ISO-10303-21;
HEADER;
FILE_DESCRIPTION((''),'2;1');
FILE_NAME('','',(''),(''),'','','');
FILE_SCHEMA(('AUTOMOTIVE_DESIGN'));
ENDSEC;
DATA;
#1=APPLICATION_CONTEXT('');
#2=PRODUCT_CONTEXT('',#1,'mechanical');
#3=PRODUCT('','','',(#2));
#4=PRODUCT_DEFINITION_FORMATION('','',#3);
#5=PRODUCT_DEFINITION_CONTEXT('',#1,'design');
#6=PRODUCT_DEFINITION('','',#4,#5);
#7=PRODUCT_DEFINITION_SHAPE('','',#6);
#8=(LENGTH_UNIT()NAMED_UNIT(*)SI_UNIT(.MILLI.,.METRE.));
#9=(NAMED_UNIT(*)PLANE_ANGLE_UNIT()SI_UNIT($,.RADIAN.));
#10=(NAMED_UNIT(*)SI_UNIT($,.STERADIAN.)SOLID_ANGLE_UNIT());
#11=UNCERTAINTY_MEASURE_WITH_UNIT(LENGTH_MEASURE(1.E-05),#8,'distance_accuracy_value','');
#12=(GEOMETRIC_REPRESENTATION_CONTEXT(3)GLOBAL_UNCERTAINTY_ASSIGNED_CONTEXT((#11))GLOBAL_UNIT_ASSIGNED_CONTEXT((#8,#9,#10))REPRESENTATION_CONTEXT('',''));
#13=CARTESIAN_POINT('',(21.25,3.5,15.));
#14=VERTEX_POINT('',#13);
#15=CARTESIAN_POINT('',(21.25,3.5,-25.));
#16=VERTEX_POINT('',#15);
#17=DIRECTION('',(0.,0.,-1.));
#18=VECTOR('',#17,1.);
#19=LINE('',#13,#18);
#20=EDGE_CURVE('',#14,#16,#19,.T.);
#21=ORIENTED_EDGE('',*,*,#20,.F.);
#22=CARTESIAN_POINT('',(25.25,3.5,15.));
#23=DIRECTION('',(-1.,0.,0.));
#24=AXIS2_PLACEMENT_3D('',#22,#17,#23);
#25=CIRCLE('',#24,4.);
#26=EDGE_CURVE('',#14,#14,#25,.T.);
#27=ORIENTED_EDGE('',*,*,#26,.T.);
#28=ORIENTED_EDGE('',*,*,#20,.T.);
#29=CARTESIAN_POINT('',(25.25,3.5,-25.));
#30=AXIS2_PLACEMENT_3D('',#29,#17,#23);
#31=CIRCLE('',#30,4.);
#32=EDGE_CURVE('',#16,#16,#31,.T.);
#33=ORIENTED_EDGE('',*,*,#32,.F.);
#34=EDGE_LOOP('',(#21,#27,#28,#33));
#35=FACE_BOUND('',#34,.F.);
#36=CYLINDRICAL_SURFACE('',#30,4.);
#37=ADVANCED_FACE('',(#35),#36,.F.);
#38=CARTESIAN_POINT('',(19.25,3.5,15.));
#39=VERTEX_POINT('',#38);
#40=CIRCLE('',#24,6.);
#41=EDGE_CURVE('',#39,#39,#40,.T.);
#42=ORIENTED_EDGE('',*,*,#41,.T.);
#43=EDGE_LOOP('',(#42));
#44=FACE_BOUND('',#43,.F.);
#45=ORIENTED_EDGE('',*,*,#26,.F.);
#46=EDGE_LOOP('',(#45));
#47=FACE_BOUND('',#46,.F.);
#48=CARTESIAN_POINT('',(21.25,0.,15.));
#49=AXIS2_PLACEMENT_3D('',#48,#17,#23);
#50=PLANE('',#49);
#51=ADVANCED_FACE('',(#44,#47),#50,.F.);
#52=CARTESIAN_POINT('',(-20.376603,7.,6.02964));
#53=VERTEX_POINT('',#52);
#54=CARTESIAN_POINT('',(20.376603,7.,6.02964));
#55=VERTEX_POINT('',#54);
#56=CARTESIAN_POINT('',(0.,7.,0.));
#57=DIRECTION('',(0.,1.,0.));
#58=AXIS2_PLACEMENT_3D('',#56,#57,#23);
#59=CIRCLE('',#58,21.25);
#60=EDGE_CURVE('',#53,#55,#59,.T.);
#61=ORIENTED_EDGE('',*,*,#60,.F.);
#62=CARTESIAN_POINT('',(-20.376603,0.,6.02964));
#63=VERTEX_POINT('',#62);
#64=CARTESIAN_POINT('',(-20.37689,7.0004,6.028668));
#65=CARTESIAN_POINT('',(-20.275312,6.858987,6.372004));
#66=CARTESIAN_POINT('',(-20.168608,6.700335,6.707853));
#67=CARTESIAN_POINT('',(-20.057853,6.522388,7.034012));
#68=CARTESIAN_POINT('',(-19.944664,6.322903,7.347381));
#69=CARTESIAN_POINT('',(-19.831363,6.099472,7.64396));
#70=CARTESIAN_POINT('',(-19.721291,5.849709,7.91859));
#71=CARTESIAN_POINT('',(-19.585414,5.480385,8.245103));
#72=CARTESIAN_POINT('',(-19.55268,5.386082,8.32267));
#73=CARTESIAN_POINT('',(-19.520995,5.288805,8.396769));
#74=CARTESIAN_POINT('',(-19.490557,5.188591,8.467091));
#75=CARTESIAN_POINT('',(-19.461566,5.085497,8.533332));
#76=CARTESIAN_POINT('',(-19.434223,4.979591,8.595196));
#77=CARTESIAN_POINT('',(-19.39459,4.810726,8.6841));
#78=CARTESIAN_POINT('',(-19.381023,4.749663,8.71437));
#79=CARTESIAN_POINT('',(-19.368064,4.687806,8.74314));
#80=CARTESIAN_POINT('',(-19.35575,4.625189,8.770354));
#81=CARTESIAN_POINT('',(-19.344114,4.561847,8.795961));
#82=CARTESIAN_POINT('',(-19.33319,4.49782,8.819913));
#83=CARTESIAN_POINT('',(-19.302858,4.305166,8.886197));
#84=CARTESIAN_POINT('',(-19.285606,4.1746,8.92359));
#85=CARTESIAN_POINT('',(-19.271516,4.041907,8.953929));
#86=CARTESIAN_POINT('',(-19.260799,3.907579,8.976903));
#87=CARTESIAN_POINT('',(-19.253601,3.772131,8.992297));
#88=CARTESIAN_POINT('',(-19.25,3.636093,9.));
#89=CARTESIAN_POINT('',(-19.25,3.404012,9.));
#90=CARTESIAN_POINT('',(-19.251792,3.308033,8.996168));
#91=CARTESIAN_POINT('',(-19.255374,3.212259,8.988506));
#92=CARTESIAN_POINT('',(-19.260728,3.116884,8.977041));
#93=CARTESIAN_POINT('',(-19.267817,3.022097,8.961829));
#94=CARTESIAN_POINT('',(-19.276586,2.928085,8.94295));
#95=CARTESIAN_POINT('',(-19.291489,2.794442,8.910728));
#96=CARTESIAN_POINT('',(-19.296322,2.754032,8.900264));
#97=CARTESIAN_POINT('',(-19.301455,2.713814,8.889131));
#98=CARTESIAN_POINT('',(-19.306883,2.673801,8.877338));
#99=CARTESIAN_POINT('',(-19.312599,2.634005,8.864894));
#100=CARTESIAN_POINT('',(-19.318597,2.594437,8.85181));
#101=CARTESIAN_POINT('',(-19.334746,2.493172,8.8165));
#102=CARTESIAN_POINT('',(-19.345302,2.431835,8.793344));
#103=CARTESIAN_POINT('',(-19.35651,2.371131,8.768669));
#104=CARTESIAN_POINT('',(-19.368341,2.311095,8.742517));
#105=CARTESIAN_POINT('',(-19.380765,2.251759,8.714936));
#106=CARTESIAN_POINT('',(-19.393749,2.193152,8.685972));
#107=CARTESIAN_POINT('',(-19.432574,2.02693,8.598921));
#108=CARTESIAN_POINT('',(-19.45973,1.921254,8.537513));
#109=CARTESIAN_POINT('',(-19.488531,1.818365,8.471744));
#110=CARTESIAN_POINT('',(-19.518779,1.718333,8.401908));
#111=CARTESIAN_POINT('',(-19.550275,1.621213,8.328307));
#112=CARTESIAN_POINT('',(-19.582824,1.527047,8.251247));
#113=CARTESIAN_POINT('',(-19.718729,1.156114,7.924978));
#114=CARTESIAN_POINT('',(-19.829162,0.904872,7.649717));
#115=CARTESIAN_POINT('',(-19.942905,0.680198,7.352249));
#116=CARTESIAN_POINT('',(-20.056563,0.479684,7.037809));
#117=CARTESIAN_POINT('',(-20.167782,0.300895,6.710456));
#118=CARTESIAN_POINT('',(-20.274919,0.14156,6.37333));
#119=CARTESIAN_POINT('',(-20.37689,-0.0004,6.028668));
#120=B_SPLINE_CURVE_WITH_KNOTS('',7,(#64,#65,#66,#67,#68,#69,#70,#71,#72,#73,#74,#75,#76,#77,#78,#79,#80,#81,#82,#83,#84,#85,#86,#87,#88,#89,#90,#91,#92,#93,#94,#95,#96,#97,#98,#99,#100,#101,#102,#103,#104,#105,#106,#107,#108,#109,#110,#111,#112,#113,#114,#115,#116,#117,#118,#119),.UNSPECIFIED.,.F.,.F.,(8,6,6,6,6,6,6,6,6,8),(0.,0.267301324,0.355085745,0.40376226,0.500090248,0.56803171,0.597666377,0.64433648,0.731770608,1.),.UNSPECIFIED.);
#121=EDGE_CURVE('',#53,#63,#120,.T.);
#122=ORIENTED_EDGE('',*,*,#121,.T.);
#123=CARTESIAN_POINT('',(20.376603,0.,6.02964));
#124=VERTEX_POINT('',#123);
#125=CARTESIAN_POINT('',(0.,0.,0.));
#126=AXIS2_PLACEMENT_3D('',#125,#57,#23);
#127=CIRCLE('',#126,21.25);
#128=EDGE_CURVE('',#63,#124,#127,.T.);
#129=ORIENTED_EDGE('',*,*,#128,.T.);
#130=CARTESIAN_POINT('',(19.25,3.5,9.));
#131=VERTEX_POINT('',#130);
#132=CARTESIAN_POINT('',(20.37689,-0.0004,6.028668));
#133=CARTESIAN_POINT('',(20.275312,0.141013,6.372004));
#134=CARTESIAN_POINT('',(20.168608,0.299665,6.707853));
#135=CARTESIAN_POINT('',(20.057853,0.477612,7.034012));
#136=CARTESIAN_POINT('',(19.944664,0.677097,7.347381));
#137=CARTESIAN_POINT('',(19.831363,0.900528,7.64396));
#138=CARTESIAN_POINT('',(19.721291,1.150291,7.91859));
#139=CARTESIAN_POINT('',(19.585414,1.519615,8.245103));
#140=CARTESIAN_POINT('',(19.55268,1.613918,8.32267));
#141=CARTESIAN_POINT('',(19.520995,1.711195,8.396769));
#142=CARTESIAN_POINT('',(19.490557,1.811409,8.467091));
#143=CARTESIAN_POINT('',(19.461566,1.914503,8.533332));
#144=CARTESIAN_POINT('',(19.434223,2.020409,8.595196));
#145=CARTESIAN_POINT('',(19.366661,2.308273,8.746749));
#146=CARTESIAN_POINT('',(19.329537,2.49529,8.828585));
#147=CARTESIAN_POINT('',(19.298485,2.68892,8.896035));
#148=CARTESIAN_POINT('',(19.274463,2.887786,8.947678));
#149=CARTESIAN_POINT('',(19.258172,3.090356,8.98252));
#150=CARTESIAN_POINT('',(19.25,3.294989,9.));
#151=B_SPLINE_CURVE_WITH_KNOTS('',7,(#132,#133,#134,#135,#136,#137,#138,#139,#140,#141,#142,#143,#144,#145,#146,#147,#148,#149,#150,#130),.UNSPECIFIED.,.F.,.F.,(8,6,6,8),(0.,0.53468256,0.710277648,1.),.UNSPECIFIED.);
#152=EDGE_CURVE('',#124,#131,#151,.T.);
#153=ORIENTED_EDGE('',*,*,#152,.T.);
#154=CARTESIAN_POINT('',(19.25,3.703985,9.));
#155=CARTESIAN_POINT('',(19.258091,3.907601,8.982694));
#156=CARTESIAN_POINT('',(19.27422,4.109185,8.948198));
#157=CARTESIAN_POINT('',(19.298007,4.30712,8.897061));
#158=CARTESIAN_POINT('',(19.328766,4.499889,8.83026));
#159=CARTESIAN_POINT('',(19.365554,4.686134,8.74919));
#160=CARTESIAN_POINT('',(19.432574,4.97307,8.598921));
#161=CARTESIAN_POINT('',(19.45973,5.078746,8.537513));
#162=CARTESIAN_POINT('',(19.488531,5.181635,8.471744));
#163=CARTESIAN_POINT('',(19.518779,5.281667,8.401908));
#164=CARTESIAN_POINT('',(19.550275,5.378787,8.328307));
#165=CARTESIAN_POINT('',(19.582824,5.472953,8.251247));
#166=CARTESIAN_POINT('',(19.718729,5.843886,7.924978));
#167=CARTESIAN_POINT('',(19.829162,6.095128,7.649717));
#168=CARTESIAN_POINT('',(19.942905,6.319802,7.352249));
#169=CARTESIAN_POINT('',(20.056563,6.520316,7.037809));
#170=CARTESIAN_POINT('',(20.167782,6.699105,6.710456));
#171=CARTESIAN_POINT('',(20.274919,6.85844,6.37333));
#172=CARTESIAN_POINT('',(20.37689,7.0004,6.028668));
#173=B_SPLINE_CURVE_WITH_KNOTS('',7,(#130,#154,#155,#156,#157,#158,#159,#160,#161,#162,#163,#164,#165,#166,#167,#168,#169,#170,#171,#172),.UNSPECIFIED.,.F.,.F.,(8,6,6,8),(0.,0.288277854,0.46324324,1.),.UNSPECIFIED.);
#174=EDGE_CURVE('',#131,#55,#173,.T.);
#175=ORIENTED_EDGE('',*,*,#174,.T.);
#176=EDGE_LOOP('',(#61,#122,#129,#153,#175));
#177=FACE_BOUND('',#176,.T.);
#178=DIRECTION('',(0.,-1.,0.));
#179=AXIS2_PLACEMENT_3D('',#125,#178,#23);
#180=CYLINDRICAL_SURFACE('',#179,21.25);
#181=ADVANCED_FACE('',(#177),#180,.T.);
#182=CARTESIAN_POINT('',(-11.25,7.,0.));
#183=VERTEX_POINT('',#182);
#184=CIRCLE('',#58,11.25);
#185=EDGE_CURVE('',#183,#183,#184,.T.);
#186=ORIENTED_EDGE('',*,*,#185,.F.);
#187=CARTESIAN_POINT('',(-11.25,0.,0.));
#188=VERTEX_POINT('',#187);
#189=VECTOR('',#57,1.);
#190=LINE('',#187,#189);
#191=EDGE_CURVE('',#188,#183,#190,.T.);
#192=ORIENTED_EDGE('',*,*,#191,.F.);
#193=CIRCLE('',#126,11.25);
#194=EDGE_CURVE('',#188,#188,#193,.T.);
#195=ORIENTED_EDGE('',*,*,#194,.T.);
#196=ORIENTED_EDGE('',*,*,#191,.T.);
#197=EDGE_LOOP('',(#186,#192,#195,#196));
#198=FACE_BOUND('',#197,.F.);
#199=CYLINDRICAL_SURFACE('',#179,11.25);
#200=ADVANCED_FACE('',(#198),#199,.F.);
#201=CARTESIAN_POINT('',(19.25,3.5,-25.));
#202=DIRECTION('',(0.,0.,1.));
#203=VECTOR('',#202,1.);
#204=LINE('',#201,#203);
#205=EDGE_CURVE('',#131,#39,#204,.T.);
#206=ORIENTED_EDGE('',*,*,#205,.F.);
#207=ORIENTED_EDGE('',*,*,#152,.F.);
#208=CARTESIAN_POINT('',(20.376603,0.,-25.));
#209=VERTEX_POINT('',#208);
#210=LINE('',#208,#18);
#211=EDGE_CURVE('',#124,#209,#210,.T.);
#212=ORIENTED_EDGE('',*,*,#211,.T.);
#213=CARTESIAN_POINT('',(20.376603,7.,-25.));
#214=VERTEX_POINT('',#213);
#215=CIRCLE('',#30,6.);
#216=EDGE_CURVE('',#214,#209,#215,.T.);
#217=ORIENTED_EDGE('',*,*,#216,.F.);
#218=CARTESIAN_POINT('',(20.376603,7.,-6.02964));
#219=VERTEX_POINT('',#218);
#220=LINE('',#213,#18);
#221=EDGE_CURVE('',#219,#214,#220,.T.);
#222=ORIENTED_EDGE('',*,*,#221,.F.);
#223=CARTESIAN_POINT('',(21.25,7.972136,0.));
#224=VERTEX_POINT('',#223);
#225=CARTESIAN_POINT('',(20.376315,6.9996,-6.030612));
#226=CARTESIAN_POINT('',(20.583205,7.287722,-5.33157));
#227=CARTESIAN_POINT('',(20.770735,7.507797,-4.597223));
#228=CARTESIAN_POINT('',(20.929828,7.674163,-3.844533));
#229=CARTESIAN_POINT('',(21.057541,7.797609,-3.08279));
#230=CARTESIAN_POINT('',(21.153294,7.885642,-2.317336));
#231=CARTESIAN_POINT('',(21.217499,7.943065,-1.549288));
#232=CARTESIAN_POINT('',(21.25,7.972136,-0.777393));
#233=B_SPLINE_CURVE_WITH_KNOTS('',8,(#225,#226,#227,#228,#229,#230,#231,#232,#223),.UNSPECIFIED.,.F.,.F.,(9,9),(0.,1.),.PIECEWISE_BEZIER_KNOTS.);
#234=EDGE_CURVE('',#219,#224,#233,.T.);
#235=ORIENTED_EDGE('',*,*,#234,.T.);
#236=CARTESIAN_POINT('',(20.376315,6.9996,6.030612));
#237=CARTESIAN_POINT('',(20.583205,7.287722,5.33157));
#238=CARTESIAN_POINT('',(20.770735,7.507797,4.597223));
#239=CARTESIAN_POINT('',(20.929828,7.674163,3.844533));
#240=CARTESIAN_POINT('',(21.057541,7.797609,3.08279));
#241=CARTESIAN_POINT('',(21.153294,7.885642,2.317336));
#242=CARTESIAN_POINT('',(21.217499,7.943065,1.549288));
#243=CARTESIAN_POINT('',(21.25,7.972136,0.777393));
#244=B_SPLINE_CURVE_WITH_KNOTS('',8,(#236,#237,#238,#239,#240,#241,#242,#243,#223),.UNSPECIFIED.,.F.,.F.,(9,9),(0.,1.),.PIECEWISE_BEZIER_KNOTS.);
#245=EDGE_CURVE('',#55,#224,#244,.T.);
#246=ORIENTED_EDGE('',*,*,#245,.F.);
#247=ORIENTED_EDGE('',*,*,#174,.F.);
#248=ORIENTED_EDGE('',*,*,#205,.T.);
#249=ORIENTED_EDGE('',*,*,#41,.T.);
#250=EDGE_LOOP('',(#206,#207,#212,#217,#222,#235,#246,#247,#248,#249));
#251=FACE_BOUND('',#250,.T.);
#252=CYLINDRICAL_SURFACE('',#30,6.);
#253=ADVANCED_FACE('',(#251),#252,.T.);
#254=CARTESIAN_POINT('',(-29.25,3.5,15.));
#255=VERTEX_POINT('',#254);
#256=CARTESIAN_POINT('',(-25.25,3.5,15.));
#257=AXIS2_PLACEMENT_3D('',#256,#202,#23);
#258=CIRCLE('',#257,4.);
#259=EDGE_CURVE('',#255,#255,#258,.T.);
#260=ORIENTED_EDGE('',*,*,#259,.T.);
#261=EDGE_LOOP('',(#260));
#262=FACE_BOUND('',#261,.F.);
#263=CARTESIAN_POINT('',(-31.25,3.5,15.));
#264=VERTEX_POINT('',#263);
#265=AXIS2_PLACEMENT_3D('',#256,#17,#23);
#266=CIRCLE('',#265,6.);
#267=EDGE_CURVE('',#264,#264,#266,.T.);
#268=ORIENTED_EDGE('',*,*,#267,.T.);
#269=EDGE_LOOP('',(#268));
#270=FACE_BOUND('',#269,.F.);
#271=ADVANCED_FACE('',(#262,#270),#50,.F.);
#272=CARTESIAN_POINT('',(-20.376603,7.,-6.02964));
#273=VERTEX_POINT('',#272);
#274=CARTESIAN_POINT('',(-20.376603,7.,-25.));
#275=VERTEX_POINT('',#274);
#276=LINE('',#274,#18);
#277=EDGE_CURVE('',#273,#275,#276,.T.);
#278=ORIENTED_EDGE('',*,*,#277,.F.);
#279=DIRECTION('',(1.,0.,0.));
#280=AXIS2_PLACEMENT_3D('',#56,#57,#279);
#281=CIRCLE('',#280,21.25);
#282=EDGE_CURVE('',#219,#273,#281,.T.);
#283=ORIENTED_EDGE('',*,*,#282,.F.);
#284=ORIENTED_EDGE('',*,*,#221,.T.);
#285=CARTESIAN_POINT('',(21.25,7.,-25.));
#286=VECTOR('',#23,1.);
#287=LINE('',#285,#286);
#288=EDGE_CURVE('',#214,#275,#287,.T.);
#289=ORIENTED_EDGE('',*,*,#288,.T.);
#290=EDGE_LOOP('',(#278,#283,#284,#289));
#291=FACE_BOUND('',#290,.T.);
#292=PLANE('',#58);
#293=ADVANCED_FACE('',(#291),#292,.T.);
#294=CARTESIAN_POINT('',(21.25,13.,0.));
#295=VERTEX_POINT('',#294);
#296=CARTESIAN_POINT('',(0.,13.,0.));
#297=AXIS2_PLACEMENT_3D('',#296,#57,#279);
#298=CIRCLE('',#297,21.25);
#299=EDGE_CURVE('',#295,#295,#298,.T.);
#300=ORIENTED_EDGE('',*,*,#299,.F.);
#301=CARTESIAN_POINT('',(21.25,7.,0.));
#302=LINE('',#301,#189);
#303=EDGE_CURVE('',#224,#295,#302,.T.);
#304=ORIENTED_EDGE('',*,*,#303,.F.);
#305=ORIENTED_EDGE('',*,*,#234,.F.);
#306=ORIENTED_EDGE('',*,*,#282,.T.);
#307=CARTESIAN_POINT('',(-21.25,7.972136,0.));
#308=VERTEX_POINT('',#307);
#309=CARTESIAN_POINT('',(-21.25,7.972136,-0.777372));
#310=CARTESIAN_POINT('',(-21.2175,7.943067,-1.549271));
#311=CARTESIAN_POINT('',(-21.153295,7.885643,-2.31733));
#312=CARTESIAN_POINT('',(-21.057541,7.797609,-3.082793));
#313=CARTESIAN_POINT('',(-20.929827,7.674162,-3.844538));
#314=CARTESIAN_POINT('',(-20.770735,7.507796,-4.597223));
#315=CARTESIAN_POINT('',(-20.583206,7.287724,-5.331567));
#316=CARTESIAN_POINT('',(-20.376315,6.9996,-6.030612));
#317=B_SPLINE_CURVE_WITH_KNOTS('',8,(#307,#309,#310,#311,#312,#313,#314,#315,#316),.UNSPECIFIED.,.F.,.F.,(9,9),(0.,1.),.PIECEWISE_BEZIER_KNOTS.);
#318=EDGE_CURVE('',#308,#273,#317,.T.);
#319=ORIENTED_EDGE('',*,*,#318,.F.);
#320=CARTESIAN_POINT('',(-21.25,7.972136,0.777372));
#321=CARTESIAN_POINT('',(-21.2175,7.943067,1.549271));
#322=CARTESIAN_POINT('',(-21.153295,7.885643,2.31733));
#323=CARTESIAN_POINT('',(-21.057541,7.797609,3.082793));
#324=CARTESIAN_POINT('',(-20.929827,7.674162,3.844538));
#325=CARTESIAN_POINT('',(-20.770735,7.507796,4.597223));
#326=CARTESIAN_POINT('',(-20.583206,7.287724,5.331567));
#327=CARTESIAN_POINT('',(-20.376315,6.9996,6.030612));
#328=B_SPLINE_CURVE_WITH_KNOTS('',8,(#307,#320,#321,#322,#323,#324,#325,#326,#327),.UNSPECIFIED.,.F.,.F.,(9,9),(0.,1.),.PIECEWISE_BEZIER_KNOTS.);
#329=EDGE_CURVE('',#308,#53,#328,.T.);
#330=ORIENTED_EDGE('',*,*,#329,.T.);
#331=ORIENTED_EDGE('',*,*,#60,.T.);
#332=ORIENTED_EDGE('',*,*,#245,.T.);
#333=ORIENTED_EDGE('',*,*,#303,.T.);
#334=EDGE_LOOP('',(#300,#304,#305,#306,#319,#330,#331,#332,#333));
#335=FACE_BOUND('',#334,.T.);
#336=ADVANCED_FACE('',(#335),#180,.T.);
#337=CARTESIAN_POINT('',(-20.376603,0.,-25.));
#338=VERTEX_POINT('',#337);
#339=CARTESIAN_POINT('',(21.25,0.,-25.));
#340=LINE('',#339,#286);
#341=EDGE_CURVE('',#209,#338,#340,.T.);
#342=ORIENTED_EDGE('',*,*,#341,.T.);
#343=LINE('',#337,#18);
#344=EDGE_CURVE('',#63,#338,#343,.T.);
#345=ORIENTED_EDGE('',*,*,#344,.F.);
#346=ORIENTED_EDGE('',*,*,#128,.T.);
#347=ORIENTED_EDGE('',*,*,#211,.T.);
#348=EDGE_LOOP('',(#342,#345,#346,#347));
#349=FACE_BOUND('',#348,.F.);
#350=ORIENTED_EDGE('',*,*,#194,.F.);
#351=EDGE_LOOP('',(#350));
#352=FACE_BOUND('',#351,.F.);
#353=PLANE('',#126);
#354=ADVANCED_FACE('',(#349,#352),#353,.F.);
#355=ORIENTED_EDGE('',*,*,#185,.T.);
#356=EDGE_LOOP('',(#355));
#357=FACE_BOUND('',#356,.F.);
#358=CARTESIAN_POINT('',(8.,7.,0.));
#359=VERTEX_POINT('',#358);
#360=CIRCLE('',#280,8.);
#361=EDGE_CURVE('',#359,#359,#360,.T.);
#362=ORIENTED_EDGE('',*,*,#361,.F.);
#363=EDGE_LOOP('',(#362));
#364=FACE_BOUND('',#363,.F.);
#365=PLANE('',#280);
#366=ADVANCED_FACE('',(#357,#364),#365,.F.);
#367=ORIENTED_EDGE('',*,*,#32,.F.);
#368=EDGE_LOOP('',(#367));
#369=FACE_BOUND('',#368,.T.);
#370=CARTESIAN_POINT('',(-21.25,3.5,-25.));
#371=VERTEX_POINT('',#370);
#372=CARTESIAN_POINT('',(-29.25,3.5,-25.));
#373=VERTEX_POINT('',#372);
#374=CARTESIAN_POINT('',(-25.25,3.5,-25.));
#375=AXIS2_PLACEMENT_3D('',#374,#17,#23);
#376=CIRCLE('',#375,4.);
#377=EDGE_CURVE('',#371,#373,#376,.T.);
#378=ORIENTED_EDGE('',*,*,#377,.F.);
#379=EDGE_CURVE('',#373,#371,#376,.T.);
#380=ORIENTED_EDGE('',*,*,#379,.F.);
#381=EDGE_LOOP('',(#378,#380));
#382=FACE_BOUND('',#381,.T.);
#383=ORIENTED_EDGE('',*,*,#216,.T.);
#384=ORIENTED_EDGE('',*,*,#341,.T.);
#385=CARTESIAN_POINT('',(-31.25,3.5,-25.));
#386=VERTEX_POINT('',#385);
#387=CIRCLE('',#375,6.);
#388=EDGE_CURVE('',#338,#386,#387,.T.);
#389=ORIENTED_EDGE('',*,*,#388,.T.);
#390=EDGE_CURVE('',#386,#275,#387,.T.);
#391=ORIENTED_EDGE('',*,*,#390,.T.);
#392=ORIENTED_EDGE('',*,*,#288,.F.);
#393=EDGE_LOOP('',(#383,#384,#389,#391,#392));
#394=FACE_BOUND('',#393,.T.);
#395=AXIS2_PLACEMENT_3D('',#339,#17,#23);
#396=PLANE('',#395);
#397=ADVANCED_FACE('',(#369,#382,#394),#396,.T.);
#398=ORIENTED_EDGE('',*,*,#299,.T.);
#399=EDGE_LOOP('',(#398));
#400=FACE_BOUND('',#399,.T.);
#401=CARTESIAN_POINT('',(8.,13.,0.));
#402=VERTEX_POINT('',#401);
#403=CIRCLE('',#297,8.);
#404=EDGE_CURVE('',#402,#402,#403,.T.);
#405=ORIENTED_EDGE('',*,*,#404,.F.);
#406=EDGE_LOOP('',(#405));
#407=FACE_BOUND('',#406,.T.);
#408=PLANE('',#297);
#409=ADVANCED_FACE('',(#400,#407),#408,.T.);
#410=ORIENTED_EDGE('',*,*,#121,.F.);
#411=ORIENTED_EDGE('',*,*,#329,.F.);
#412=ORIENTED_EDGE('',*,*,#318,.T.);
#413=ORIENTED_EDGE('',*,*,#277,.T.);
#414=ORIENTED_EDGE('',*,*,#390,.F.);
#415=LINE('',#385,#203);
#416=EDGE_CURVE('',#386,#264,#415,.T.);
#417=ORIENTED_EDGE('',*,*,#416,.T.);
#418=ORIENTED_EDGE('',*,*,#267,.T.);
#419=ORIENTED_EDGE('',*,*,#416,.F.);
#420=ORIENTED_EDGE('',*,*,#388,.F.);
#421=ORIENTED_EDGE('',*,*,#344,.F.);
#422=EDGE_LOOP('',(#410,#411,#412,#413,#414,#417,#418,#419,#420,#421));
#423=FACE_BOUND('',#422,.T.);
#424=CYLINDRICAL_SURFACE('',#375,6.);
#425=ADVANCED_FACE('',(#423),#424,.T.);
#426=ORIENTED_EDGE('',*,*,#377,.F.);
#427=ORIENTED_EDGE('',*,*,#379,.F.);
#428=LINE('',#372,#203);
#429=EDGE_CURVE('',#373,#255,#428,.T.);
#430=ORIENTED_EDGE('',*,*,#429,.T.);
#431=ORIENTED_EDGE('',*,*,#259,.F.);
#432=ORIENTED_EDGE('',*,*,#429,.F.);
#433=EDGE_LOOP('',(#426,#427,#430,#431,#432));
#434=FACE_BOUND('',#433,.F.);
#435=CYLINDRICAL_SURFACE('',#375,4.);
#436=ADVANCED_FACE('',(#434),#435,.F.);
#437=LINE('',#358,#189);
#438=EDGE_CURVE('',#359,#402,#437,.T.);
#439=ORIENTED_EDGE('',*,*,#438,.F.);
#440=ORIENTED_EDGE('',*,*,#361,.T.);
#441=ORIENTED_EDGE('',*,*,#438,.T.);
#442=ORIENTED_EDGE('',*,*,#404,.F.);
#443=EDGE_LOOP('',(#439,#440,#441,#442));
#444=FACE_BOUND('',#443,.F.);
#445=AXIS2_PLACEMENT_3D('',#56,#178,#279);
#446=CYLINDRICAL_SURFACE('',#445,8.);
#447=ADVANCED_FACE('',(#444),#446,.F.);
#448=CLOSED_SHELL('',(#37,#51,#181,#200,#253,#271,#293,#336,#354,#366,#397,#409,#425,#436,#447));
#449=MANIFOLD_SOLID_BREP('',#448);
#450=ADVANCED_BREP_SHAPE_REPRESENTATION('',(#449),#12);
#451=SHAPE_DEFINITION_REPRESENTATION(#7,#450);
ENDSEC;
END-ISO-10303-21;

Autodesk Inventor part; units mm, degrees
ref_plane "YZ Plane" through (0, 0, 0) normal (1, 0, 0) x (0, 1, 0)
ref_plane "XZ Plane" through (0, 0, 0) normal (0, 1, 0) x (-1, 0, 0)
ref_plane "XY Plane" through (0, 0, 0) normal (0, 0, 1) x (1, 0, 0)
sketch "Sketch1" plane through (0, 0, 0) normal (0, 1, 0) x (-1, 0, 0)
  circle A0 centre (0, 0) radius 11.25
  arc A1 (21.25, 0) -> (-21.25, 0) centre (0, 0) ccw
  line L0 (0, -140) -> (21.25, -140)
  line L1 (21.25, -140) -> (-21.25, -140)
  line L2 (-21.25, -140) -> (-21.25, 0)
  line L3 (21.25, -140) -> (21.25, 0)
  dimension "d0" = 22.5
extrude "Extrusion1" add sketch "Sketch1" along normal blind 7
sketch "Sketch2" plane through (0, 7, 0) normal (0, 1, 0) x (1, 0, 0)
  circle A0 centre (0, 0) radius 11.25 projected
  circle A1 centre (0, 0) radius 21.25
  circle A2 centre (0, 0) radius 8
  dimension "d5" = 16
extrude "Extrusion2" add sketch "Sketch2" along normal blind 6 contours A0 | A1
sketch "Sketch3" plane through (0, 7, 0) normal (0, 1, 0) x (1, 0, 0)
  point P0 (0, 0)
sketch "Sketch4" plane through (21.25, 0, -140) normal (0, 0, -1) x (-1, 0, 0)
  line L0 (0, 0) -> (42.5, 0) projected
  line L1 (42.5, 0) -> (42.5, 7) projected
  line L2 (0, 7) -> (42.5, 7) projected
  line L3 (0, 0) -> (0, 7) projected
  point P0 (21.25, 0)
extrude "Extrusion3" cut sketch "Sketch4" against normal blind 115
sketch "Sketch5" plane through (21.25, 0, -25) normal (0, 0, -1) x (-1, 0, 0)
  line L0 (0, 0) -> (0, 7) projected
  line L1 (0, 3.5) -> (-4, 3.5)
  circle A0 centre (-4, 3.5) radius 4
  circle A1 centre (-4, 3.5) radius 6
  line L2 (42.5, 0) -> (42.5, 7) projected
  line L3 (42.5, 3.5) -> (46.5, 3.5)
  circle A2 centre (46.5, 3.5) radius 4
  circle A3 centre (46.5, 3.5) radius 6
  point P0 (21.25, 0)
  dimension "d10" = 4
  dimension "d11" = 8
  dimension "d12" = 12
  dimension "d13" = 4
  dimension "d14" = 12
extrude "Extrusion4" add sketch "Sketch5" against normal blind 40
properties part number "wheel_stabilizer"
